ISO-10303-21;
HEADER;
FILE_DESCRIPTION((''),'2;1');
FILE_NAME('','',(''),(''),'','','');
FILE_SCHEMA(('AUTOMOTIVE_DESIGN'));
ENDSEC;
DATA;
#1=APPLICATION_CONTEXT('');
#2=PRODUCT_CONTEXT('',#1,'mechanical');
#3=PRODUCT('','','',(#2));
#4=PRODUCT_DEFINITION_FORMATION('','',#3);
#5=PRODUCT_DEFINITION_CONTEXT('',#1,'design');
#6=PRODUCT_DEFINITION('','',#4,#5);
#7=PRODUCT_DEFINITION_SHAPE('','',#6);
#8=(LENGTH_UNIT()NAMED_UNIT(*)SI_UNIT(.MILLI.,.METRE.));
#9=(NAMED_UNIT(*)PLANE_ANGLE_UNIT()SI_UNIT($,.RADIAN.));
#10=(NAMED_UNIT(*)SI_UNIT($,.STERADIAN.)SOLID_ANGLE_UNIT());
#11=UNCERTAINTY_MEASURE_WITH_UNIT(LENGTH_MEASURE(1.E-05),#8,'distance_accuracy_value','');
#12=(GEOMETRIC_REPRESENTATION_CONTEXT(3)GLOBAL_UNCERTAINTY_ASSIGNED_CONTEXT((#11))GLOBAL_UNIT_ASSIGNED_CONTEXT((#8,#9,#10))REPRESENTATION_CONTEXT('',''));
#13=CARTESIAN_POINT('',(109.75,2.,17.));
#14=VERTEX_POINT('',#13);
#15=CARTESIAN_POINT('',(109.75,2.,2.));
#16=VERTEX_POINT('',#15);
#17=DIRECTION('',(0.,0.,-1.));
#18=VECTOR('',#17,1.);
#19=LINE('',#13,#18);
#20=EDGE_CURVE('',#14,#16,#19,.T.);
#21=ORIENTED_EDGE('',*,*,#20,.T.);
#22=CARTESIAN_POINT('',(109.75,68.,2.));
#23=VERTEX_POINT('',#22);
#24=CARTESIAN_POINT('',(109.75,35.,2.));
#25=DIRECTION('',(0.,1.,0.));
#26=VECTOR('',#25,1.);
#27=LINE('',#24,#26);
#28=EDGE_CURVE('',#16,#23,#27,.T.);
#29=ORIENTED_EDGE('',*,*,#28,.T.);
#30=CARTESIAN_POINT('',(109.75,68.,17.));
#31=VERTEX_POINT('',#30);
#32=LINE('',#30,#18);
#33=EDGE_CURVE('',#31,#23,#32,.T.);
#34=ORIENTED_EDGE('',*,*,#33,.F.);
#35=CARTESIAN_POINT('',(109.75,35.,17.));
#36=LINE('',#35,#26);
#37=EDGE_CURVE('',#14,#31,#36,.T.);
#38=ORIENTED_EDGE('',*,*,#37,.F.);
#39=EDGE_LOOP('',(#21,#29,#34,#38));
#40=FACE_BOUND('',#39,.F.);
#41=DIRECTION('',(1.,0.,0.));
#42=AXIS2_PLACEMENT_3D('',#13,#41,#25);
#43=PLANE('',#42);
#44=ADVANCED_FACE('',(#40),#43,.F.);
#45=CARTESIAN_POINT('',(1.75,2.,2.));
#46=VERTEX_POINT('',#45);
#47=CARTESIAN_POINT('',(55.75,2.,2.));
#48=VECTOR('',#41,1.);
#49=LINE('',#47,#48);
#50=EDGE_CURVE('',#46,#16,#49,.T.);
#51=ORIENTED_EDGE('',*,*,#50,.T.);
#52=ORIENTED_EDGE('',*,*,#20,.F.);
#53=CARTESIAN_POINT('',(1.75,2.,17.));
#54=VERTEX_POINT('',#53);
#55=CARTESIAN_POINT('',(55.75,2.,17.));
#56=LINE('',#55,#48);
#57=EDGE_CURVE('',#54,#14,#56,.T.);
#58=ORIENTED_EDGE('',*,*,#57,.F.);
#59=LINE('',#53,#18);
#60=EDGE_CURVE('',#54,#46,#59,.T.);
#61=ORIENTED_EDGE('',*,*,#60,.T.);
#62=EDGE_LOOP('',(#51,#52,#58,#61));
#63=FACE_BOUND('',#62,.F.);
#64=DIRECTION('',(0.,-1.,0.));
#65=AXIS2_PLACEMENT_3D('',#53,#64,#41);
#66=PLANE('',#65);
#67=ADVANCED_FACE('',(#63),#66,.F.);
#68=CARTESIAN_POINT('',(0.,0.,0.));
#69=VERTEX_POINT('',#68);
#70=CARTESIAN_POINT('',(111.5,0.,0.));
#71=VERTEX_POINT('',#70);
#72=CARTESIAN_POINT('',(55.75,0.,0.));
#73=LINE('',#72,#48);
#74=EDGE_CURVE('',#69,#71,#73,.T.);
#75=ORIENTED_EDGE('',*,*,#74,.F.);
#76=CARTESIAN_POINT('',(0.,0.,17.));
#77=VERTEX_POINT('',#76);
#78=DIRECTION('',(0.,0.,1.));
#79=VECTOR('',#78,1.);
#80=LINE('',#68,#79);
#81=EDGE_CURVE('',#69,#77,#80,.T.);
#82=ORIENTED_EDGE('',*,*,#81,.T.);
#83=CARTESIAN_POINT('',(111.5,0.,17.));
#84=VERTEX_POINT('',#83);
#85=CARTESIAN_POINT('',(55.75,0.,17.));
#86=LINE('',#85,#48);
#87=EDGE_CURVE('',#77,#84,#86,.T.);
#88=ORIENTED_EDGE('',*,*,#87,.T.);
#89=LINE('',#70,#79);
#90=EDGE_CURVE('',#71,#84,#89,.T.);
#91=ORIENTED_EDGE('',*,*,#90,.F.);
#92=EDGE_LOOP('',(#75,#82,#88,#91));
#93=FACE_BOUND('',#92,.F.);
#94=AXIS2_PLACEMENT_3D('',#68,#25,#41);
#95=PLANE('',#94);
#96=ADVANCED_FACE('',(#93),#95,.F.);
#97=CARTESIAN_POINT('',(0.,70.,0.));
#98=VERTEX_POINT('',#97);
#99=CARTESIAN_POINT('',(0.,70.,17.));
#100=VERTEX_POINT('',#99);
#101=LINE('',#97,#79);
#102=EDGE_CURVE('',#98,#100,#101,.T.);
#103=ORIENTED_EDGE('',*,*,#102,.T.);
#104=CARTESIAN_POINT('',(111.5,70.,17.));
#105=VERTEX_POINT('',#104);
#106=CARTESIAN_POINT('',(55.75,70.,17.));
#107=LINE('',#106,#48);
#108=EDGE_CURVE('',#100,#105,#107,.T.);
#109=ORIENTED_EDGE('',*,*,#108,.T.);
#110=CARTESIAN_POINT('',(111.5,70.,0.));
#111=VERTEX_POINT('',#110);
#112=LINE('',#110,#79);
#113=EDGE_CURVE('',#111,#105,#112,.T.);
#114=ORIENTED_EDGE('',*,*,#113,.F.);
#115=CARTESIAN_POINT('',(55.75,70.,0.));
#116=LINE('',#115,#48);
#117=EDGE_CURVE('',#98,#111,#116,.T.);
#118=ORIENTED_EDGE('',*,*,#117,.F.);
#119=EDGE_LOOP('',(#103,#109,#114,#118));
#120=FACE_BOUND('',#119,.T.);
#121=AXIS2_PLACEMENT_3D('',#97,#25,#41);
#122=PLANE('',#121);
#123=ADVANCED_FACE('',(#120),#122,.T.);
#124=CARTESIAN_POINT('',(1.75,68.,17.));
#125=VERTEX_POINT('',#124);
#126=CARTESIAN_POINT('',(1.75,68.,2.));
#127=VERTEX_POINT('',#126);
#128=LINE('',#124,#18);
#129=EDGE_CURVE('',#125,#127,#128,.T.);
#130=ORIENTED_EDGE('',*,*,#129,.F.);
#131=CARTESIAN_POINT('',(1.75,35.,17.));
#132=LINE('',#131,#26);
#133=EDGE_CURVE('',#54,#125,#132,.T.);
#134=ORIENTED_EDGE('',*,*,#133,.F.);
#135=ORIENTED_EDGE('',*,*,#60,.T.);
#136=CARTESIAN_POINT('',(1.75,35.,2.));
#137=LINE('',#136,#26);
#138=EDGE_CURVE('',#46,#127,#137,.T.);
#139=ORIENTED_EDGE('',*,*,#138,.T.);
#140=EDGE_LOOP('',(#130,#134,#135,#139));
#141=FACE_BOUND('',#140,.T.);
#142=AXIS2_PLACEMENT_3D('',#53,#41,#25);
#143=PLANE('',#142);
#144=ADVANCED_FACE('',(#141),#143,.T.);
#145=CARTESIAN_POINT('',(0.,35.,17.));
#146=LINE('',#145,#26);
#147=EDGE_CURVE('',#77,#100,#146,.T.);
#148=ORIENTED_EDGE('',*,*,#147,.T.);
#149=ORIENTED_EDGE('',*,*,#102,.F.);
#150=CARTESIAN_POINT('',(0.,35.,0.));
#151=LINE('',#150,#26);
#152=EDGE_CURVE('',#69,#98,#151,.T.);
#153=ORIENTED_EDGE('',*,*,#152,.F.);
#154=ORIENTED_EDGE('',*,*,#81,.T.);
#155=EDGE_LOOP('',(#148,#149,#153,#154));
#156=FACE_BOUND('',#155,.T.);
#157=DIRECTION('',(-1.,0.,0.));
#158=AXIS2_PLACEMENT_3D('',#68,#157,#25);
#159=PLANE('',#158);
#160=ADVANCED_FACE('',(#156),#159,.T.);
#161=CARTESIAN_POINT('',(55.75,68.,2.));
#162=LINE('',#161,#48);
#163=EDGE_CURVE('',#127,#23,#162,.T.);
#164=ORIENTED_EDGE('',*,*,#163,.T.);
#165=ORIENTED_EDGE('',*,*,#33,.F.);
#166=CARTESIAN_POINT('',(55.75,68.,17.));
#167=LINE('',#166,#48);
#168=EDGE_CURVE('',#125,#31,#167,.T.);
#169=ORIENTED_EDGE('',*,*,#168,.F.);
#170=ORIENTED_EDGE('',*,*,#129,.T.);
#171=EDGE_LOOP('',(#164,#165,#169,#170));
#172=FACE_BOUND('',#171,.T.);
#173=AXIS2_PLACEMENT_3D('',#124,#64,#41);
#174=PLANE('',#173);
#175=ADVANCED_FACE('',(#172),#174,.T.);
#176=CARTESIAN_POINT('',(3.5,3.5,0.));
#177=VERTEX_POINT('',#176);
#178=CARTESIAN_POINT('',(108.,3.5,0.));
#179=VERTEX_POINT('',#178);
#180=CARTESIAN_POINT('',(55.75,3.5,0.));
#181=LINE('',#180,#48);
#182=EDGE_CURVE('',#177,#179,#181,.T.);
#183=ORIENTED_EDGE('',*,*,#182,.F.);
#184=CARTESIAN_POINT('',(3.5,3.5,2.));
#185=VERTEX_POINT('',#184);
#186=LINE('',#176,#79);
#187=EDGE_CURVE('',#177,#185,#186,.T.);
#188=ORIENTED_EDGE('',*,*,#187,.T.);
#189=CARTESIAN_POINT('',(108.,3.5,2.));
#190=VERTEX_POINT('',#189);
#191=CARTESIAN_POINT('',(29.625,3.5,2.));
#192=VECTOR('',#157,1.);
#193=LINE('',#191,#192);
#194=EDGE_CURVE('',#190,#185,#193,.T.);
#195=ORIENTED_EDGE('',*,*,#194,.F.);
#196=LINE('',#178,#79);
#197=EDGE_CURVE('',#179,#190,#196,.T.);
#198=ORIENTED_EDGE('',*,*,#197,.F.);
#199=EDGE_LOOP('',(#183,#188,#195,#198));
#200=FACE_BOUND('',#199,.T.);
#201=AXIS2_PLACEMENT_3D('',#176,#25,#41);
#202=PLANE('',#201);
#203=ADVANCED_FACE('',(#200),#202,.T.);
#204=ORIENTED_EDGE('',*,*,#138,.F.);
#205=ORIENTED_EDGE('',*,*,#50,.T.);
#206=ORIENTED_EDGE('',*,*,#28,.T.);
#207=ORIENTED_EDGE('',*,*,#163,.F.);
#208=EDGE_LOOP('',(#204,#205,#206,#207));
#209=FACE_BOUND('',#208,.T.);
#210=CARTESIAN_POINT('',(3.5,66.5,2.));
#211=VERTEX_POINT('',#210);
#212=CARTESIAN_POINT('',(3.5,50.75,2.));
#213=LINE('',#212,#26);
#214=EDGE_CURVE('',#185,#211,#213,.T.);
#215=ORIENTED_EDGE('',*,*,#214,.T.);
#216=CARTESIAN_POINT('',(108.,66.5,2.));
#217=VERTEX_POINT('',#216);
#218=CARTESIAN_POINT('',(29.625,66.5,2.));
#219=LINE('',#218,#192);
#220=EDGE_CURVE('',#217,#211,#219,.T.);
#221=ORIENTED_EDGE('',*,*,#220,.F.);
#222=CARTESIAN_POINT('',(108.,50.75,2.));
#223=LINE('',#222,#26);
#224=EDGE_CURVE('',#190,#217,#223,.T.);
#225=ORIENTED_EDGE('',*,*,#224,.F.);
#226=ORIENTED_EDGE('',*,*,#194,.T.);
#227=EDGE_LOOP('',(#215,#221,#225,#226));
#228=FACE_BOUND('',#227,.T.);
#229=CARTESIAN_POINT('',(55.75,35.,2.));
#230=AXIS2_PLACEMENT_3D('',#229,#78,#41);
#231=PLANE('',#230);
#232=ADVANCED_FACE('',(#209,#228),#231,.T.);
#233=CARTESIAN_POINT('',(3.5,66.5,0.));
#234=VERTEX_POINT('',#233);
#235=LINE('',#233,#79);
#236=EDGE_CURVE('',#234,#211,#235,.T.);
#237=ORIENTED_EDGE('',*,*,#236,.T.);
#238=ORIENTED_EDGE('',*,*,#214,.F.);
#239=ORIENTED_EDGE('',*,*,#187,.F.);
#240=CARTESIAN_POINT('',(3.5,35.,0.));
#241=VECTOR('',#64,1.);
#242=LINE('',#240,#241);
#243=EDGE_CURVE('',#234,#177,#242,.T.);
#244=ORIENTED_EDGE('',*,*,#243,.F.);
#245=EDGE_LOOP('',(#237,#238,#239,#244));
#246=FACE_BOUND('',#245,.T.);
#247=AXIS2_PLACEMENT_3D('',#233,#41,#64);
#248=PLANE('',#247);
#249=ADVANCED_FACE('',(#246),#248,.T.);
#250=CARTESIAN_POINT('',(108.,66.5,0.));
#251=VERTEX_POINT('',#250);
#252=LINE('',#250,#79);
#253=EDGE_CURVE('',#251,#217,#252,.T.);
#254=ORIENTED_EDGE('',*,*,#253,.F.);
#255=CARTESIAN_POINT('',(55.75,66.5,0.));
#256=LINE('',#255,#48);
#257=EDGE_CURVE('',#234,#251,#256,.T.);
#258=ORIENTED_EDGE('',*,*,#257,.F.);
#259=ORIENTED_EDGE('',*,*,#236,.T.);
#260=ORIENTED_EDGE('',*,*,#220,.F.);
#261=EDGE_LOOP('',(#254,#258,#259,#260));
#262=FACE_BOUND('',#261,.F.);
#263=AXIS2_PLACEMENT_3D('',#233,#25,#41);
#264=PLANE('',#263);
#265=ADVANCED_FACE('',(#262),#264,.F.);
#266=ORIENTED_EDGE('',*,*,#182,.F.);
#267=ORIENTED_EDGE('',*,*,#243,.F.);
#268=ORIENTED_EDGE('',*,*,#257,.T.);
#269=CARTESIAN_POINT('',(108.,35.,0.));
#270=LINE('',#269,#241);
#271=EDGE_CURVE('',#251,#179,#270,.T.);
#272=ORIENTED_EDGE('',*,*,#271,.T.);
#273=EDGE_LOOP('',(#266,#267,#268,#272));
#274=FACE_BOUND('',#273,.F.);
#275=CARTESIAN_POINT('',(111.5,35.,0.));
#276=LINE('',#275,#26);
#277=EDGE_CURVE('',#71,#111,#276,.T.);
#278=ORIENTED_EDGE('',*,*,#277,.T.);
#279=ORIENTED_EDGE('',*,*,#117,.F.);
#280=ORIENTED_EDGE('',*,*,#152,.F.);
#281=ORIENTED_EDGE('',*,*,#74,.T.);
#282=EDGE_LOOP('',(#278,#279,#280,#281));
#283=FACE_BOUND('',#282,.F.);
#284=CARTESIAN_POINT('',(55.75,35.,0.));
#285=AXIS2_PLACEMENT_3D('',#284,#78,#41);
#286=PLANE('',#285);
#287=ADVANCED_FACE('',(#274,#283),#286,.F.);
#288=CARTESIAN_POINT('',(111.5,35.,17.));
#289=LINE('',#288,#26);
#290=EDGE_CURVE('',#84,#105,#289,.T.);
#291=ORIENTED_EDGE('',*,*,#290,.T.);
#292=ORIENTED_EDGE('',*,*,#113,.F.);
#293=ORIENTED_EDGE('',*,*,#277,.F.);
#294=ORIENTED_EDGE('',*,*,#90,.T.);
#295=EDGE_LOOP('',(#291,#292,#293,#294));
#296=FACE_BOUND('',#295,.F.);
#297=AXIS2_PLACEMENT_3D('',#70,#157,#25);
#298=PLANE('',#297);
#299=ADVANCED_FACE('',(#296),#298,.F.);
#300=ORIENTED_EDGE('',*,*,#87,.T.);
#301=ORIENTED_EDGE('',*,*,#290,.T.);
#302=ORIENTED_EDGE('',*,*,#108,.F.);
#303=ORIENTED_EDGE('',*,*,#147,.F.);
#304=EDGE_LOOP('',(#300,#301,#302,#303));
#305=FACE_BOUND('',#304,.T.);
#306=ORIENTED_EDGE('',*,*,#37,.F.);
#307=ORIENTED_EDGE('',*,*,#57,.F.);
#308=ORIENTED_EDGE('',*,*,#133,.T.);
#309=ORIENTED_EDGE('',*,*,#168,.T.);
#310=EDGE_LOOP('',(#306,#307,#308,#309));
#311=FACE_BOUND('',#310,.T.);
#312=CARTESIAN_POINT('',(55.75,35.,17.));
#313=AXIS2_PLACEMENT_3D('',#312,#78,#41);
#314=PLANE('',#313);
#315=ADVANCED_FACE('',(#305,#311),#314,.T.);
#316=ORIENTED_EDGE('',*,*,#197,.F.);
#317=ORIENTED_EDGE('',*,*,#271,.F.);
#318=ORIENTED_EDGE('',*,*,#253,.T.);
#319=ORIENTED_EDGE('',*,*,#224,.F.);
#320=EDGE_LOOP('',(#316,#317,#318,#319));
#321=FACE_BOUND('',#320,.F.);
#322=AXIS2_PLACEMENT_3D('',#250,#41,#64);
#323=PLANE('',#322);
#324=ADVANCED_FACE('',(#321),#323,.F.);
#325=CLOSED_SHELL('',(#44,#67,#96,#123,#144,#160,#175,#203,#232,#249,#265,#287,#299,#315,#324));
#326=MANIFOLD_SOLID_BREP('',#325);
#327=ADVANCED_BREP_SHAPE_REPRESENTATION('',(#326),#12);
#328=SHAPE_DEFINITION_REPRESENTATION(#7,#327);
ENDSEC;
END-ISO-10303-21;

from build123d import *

# Parameters (mm, degrees)
F0_W     = 111.5
F0_H     = 70
F1_DEPTH = 17
F2_W     = 108
F2_H     = 66
F3_DEPTH = 15
F4_W     = 104.5
F4_H     = 63
F5_DEPTH = 17.001


# Not quite as in the source:
# - a feature of the source that left no trace in its solid (it failed there, or was rolled back) is left out


with BuildPart() as f1:
    # F0 (on Top) → F1 (new body)
    with BuildSketch(Plane.XY):
        with Locations((55.75, 35)):
            Rectangle(F0_W, F0_H)
    extrude(amount=F1_DEPTH)

    # F2 (on face) → F3 (cut)
    with BuildSketch(Plane.XY.offset(17)):
        with Locations((55.75, 35)):
            Rectangle(F2_W, F2_H)
    extrude(amount=-F3_DEPTH, mode=Mode.SUBTRACT)

    # F4 (on face) → F5 (cut, through all)
    with BuildSketch(Plane(origin=(0, 0, 0), x_dir=(1, 0, 0), z_dir=(0, 0, -1))):
        with Locations((55.75, -35)):
            Rectangle(F4_W, F4_H)
    extrude(amount=-F5_DEPTH, mode=Mode.SUBTRACT)


solid = f1.part
